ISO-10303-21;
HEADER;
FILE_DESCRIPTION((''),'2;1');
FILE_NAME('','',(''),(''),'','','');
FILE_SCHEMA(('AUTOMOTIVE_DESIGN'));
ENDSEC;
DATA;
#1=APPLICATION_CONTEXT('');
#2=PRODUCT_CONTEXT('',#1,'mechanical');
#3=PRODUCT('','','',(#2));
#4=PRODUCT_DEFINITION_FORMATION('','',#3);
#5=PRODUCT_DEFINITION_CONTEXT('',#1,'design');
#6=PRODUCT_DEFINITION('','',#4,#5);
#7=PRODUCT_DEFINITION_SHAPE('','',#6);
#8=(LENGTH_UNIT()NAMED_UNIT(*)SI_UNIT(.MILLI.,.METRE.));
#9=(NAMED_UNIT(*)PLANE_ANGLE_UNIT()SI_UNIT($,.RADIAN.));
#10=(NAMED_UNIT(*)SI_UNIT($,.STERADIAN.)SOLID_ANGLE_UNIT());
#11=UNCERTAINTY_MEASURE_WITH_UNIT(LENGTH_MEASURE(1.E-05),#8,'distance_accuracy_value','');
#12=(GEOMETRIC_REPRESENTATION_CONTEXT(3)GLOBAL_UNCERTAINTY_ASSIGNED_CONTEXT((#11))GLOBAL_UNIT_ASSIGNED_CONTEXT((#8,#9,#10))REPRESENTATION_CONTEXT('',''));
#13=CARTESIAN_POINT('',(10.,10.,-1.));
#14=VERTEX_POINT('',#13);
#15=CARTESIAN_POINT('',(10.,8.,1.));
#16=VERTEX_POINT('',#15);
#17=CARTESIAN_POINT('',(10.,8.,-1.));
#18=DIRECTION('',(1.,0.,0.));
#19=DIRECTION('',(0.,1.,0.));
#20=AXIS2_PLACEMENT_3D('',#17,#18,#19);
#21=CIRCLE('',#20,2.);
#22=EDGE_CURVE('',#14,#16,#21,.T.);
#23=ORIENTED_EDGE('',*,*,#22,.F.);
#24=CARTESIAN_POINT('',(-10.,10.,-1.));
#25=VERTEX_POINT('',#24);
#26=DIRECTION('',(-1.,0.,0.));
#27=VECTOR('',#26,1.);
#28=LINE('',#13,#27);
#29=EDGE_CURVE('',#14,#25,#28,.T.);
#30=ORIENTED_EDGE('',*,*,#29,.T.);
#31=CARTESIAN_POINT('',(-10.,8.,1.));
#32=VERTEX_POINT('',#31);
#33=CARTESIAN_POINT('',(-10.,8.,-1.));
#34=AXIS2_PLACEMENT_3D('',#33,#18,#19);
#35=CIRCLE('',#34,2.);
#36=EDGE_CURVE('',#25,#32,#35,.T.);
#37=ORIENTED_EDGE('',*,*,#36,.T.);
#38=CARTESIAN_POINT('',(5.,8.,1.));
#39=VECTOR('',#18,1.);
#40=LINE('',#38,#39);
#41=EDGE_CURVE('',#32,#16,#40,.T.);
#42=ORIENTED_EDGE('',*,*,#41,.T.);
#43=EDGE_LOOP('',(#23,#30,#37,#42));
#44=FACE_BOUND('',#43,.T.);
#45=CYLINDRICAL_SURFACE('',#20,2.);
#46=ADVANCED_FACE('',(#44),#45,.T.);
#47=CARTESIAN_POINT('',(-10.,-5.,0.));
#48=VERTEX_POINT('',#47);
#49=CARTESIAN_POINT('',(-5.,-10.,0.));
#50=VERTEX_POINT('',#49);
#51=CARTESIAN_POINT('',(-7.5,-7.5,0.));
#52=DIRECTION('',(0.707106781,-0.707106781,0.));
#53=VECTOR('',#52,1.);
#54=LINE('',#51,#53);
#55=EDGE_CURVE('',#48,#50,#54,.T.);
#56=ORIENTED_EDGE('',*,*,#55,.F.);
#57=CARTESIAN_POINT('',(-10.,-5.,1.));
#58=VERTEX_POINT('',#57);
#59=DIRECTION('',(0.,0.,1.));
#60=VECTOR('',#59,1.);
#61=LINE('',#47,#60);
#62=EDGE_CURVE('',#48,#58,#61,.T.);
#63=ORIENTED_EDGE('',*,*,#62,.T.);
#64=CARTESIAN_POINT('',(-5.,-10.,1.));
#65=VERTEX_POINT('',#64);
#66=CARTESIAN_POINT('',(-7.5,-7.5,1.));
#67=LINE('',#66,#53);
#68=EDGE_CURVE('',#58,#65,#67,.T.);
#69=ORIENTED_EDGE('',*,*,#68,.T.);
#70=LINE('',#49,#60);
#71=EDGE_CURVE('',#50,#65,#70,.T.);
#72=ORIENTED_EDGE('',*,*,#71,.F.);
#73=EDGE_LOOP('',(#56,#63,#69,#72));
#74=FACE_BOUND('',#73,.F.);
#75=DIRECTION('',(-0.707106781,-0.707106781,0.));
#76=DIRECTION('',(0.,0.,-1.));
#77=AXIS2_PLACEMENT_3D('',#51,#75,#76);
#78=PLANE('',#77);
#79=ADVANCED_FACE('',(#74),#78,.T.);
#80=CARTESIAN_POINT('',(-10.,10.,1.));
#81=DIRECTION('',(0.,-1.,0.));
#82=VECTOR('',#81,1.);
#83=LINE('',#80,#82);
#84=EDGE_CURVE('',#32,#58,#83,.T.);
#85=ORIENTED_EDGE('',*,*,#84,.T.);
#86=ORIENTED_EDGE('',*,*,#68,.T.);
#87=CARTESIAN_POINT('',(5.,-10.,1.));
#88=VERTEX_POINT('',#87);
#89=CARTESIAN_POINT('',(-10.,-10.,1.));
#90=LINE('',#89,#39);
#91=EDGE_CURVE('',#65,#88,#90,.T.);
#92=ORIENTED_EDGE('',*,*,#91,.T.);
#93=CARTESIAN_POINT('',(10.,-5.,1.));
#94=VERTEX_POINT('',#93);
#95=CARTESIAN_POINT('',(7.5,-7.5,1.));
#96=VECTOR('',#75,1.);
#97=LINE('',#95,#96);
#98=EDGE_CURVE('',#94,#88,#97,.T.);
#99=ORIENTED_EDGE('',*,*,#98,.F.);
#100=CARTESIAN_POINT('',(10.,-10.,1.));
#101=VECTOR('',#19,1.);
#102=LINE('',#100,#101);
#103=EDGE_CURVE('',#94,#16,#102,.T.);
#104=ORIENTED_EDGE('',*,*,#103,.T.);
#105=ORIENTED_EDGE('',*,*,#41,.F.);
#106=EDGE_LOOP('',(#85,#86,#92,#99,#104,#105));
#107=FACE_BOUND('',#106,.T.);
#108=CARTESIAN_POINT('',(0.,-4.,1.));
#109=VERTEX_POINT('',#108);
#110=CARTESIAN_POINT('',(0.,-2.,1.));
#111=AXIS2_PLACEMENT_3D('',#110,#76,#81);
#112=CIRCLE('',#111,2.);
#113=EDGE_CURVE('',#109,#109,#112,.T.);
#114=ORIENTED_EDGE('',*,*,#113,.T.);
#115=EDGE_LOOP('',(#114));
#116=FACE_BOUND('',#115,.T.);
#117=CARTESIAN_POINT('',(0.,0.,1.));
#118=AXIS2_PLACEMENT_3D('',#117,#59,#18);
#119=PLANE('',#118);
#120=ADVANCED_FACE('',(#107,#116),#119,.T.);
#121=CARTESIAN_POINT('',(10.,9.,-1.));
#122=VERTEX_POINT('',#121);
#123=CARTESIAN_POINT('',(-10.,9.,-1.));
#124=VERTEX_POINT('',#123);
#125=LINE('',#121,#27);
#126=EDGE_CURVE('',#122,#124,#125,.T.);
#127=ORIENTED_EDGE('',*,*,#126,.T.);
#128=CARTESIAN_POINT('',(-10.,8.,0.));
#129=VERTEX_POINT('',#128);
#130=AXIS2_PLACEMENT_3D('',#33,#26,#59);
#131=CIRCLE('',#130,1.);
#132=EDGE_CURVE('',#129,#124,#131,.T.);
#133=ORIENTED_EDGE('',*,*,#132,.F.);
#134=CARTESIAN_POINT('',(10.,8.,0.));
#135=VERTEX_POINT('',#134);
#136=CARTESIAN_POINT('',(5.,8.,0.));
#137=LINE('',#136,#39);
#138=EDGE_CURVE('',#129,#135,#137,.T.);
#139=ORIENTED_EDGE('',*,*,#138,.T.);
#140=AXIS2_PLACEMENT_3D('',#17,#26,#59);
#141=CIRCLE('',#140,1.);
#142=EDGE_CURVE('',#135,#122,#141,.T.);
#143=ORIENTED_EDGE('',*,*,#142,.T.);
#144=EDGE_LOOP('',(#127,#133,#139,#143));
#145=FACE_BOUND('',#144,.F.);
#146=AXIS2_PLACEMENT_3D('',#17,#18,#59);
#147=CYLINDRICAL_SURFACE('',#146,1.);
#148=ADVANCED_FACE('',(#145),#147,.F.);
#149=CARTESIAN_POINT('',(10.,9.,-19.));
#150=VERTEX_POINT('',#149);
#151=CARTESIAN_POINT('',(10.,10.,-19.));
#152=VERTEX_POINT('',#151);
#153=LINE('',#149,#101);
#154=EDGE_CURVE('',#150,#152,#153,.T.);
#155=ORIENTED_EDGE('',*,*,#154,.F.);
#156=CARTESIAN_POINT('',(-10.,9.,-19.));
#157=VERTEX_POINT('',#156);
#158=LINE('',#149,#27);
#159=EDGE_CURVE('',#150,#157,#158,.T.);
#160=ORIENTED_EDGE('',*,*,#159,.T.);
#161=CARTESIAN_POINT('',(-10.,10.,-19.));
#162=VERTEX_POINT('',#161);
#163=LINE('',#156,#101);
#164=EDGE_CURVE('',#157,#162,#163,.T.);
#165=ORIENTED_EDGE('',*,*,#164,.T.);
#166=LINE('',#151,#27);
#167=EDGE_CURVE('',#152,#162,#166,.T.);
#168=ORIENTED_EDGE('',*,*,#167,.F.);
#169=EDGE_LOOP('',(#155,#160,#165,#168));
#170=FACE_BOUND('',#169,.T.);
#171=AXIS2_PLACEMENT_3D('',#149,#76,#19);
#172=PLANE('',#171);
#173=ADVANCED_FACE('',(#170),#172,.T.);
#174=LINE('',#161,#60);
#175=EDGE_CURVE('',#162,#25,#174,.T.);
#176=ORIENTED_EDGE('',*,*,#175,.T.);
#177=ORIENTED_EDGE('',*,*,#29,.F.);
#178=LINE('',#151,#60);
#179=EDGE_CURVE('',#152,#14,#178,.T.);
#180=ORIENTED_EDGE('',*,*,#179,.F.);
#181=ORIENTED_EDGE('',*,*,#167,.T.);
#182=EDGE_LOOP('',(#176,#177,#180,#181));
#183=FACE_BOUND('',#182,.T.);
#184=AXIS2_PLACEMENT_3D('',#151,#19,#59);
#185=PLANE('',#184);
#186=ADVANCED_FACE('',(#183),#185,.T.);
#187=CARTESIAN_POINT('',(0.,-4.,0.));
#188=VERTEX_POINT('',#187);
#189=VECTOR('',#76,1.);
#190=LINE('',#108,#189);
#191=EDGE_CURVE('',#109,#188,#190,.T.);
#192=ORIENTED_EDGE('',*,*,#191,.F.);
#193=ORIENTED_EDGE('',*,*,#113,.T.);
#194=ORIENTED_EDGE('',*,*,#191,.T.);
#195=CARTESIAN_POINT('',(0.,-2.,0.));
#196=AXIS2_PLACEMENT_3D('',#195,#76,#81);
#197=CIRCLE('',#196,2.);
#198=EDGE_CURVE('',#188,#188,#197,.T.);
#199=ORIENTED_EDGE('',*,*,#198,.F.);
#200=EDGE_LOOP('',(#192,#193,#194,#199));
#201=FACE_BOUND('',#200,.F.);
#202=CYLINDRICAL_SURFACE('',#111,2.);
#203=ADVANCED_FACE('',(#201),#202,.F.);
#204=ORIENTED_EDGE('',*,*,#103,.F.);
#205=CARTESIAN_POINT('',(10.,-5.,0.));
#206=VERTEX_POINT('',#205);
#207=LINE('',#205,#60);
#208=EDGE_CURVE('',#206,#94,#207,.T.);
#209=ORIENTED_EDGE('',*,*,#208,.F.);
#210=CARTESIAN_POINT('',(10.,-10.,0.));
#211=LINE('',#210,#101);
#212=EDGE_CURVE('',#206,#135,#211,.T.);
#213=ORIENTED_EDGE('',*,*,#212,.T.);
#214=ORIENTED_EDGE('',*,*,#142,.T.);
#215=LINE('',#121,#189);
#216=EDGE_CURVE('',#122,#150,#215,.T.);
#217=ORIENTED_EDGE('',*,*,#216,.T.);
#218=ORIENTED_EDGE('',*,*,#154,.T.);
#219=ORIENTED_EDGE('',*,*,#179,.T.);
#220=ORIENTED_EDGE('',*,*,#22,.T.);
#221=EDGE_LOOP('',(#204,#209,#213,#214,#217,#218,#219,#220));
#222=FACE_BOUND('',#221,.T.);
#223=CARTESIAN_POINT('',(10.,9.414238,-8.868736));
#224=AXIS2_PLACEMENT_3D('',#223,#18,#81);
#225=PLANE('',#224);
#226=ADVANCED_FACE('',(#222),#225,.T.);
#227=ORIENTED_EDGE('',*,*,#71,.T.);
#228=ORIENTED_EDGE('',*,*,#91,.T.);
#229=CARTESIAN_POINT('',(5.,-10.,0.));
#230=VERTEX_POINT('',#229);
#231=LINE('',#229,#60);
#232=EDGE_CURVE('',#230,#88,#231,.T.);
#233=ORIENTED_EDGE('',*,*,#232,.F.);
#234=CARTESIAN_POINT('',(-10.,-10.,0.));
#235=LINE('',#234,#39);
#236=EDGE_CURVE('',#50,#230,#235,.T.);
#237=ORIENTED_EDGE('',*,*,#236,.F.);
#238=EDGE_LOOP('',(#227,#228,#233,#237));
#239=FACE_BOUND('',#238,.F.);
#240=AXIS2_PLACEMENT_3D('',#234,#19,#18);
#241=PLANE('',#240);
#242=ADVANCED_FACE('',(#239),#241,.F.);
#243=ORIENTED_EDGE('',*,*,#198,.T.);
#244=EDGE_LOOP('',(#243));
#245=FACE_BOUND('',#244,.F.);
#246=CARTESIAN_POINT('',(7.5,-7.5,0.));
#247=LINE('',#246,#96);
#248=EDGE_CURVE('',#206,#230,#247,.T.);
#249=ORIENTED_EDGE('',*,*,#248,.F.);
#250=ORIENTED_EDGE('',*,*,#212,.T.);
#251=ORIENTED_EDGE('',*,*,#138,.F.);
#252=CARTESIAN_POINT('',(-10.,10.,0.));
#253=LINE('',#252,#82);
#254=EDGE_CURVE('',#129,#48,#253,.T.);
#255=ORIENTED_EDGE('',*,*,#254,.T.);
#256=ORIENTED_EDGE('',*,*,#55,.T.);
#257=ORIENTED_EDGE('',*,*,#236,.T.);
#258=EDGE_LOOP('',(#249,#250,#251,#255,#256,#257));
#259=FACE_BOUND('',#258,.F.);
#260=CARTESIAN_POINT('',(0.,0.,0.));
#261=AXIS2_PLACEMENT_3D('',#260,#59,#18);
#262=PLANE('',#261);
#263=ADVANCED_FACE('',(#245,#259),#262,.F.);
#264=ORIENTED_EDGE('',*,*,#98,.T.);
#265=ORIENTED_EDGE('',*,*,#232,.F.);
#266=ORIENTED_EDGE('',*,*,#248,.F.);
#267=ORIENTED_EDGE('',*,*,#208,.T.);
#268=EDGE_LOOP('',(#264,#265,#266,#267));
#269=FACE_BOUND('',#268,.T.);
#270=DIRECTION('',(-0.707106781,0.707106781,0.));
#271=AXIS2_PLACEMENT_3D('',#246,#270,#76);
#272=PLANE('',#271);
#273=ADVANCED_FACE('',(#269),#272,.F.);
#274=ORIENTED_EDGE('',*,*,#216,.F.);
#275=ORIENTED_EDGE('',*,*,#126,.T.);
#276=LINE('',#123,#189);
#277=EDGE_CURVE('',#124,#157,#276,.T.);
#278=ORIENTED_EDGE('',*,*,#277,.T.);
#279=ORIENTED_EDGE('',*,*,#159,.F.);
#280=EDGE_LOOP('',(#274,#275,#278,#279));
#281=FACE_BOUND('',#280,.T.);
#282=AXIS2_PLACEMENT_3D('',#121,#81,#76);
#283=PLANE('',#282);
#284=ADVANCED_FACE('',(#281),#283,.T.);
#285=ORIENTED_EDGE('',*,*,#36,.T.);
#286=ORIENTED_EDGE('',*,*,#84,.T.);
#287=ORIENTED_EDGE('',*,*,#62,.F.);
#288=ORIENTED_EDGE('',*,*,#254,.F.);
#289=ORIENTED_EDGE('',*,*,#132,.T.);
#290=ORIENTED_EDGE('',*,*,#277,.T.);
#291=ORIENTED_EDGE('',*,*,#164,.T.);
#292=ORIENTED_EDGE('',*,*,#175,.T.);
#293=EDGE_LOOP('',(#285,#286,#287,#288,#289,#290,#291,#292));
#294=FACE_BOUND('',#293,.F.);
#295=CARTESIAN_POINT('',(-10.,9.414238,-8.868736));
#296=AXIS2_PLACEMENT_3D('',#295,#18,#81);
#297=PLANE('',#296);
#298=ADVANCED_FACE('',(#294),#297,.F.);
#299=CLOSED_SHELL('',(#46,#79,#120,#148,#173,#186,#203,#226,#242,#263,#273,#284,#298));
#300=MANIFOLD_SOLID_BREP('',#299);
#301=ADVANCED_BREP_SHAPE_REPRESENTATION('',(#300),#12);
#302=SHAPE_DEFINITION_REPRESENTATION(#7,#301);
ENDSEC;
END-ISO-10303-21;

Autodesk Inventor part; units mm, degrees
ref_plane "YZ Plane" through (0, 0, 0) normal (1, 0, 0) x (0, 1, 0)
ref_plane "XZ Plane" through (0, 0, 0) normal (0, 1, 0) x (-1, 0, 0)
ref_plane "XY Plane" through (0, 0, 0) normal (0, 0, 1) x (1, 0, 0)
sketch "Sketch1" plane through (0, 0, 0) normal (0, 0, 1) x (1, 0, 0)
  line L0 (-10, -10) -> (10, -10)
  line L1 (10, -10) -> (10, 10)
  line L2 (10, 10) -> (-10, 10)
  line L3 (-10, 10) -> (-10, -10)
  line L4 (-10, -10) -> (10, 10) construction
  line L5 (10, -10) -> (-10, 10) construction
  point P0 (0, 0)
  dimension "d0" = 20
  dimension "d1" = 20
extrude "Plate1" add sketch "Sketch1" along normal blind 1
sketch "Sketch2" plane through (10, 9, 1) normal (0, 1, 0) x (-1, 0, 0)
  line L0 (20, 0) -> (0, 0)
  line L1 (0, 0) -> (0, -20)
  line L2 (0, -20) -> (20, -20)
  line L3 (20, -20) -> (20, 0)
edge flange "Flange1" height 20 angle 90 thickness 1 bend radius 1 thickness toward (0, 1, 0) relief tear relief width 1 relief depth 0.5 edges at (0, 10, 0) wall of the first edge with corners at (-10, 9, 1) (10, 9, 1) (10, 9, -19) (-10, 9, -19)
bend "Bend1"
corner "Corner1"
sketch "Sketch3" plane through (0, 0, 1) normal (0, 0, 1) x (1, 0, 0)
  line L0 (5, -10) -> (-5, -10) projected
  point P0 (0, -2)
  point P1 (0, -2)
  point P2 (10, -10)
  point P3 (-10, -10)
  point P4 (0, -10)
  dimension "d23" = 8
chamfer "Corner Chamfer1" distance 5 angle 45 2 edges at (10, -10, 0.5) (-10, -10, 0.5)
hole "Hole1" at (0, -2, 1) direction (0, 0, -1) diameter 4 depth 1 tip angle 118
equation "\"d21\" = Thickness"
equation "\"d3\" = BendReliefWidth"
equation "\"d4\" = BendReliefDepth"
equation "\"d5\" = MinimumRemnant"
equation "\"d6\" = BendRadius"
equation "\"d9\" = BendRadius"
equation "\"d10\" = CornerReliefSize"
equation "\"d11\" = GapSize"
equation "\"d12\" = JacobiRadiusSize"
equation "\"BendRadius\" = Thickness"
equation "\"BendReliefWidth\" = Thickness"
equation "\"BendReliefDepth\" = 0.5 * Thickness"
equation "\"CornerReliefSize\" = 4 * Thickness"
equation "\"MinimumRemnant\" = 2 * Thickness"
equation "\"TransitionRadius\" = BendRadius"
equation "\"JacobiRadiusSize\" = BendRadius"
equation "\"GapSize\" = Thickness"
equation "\"d2\" = BendRadius"
equation "\"Thickness\" = 1"
